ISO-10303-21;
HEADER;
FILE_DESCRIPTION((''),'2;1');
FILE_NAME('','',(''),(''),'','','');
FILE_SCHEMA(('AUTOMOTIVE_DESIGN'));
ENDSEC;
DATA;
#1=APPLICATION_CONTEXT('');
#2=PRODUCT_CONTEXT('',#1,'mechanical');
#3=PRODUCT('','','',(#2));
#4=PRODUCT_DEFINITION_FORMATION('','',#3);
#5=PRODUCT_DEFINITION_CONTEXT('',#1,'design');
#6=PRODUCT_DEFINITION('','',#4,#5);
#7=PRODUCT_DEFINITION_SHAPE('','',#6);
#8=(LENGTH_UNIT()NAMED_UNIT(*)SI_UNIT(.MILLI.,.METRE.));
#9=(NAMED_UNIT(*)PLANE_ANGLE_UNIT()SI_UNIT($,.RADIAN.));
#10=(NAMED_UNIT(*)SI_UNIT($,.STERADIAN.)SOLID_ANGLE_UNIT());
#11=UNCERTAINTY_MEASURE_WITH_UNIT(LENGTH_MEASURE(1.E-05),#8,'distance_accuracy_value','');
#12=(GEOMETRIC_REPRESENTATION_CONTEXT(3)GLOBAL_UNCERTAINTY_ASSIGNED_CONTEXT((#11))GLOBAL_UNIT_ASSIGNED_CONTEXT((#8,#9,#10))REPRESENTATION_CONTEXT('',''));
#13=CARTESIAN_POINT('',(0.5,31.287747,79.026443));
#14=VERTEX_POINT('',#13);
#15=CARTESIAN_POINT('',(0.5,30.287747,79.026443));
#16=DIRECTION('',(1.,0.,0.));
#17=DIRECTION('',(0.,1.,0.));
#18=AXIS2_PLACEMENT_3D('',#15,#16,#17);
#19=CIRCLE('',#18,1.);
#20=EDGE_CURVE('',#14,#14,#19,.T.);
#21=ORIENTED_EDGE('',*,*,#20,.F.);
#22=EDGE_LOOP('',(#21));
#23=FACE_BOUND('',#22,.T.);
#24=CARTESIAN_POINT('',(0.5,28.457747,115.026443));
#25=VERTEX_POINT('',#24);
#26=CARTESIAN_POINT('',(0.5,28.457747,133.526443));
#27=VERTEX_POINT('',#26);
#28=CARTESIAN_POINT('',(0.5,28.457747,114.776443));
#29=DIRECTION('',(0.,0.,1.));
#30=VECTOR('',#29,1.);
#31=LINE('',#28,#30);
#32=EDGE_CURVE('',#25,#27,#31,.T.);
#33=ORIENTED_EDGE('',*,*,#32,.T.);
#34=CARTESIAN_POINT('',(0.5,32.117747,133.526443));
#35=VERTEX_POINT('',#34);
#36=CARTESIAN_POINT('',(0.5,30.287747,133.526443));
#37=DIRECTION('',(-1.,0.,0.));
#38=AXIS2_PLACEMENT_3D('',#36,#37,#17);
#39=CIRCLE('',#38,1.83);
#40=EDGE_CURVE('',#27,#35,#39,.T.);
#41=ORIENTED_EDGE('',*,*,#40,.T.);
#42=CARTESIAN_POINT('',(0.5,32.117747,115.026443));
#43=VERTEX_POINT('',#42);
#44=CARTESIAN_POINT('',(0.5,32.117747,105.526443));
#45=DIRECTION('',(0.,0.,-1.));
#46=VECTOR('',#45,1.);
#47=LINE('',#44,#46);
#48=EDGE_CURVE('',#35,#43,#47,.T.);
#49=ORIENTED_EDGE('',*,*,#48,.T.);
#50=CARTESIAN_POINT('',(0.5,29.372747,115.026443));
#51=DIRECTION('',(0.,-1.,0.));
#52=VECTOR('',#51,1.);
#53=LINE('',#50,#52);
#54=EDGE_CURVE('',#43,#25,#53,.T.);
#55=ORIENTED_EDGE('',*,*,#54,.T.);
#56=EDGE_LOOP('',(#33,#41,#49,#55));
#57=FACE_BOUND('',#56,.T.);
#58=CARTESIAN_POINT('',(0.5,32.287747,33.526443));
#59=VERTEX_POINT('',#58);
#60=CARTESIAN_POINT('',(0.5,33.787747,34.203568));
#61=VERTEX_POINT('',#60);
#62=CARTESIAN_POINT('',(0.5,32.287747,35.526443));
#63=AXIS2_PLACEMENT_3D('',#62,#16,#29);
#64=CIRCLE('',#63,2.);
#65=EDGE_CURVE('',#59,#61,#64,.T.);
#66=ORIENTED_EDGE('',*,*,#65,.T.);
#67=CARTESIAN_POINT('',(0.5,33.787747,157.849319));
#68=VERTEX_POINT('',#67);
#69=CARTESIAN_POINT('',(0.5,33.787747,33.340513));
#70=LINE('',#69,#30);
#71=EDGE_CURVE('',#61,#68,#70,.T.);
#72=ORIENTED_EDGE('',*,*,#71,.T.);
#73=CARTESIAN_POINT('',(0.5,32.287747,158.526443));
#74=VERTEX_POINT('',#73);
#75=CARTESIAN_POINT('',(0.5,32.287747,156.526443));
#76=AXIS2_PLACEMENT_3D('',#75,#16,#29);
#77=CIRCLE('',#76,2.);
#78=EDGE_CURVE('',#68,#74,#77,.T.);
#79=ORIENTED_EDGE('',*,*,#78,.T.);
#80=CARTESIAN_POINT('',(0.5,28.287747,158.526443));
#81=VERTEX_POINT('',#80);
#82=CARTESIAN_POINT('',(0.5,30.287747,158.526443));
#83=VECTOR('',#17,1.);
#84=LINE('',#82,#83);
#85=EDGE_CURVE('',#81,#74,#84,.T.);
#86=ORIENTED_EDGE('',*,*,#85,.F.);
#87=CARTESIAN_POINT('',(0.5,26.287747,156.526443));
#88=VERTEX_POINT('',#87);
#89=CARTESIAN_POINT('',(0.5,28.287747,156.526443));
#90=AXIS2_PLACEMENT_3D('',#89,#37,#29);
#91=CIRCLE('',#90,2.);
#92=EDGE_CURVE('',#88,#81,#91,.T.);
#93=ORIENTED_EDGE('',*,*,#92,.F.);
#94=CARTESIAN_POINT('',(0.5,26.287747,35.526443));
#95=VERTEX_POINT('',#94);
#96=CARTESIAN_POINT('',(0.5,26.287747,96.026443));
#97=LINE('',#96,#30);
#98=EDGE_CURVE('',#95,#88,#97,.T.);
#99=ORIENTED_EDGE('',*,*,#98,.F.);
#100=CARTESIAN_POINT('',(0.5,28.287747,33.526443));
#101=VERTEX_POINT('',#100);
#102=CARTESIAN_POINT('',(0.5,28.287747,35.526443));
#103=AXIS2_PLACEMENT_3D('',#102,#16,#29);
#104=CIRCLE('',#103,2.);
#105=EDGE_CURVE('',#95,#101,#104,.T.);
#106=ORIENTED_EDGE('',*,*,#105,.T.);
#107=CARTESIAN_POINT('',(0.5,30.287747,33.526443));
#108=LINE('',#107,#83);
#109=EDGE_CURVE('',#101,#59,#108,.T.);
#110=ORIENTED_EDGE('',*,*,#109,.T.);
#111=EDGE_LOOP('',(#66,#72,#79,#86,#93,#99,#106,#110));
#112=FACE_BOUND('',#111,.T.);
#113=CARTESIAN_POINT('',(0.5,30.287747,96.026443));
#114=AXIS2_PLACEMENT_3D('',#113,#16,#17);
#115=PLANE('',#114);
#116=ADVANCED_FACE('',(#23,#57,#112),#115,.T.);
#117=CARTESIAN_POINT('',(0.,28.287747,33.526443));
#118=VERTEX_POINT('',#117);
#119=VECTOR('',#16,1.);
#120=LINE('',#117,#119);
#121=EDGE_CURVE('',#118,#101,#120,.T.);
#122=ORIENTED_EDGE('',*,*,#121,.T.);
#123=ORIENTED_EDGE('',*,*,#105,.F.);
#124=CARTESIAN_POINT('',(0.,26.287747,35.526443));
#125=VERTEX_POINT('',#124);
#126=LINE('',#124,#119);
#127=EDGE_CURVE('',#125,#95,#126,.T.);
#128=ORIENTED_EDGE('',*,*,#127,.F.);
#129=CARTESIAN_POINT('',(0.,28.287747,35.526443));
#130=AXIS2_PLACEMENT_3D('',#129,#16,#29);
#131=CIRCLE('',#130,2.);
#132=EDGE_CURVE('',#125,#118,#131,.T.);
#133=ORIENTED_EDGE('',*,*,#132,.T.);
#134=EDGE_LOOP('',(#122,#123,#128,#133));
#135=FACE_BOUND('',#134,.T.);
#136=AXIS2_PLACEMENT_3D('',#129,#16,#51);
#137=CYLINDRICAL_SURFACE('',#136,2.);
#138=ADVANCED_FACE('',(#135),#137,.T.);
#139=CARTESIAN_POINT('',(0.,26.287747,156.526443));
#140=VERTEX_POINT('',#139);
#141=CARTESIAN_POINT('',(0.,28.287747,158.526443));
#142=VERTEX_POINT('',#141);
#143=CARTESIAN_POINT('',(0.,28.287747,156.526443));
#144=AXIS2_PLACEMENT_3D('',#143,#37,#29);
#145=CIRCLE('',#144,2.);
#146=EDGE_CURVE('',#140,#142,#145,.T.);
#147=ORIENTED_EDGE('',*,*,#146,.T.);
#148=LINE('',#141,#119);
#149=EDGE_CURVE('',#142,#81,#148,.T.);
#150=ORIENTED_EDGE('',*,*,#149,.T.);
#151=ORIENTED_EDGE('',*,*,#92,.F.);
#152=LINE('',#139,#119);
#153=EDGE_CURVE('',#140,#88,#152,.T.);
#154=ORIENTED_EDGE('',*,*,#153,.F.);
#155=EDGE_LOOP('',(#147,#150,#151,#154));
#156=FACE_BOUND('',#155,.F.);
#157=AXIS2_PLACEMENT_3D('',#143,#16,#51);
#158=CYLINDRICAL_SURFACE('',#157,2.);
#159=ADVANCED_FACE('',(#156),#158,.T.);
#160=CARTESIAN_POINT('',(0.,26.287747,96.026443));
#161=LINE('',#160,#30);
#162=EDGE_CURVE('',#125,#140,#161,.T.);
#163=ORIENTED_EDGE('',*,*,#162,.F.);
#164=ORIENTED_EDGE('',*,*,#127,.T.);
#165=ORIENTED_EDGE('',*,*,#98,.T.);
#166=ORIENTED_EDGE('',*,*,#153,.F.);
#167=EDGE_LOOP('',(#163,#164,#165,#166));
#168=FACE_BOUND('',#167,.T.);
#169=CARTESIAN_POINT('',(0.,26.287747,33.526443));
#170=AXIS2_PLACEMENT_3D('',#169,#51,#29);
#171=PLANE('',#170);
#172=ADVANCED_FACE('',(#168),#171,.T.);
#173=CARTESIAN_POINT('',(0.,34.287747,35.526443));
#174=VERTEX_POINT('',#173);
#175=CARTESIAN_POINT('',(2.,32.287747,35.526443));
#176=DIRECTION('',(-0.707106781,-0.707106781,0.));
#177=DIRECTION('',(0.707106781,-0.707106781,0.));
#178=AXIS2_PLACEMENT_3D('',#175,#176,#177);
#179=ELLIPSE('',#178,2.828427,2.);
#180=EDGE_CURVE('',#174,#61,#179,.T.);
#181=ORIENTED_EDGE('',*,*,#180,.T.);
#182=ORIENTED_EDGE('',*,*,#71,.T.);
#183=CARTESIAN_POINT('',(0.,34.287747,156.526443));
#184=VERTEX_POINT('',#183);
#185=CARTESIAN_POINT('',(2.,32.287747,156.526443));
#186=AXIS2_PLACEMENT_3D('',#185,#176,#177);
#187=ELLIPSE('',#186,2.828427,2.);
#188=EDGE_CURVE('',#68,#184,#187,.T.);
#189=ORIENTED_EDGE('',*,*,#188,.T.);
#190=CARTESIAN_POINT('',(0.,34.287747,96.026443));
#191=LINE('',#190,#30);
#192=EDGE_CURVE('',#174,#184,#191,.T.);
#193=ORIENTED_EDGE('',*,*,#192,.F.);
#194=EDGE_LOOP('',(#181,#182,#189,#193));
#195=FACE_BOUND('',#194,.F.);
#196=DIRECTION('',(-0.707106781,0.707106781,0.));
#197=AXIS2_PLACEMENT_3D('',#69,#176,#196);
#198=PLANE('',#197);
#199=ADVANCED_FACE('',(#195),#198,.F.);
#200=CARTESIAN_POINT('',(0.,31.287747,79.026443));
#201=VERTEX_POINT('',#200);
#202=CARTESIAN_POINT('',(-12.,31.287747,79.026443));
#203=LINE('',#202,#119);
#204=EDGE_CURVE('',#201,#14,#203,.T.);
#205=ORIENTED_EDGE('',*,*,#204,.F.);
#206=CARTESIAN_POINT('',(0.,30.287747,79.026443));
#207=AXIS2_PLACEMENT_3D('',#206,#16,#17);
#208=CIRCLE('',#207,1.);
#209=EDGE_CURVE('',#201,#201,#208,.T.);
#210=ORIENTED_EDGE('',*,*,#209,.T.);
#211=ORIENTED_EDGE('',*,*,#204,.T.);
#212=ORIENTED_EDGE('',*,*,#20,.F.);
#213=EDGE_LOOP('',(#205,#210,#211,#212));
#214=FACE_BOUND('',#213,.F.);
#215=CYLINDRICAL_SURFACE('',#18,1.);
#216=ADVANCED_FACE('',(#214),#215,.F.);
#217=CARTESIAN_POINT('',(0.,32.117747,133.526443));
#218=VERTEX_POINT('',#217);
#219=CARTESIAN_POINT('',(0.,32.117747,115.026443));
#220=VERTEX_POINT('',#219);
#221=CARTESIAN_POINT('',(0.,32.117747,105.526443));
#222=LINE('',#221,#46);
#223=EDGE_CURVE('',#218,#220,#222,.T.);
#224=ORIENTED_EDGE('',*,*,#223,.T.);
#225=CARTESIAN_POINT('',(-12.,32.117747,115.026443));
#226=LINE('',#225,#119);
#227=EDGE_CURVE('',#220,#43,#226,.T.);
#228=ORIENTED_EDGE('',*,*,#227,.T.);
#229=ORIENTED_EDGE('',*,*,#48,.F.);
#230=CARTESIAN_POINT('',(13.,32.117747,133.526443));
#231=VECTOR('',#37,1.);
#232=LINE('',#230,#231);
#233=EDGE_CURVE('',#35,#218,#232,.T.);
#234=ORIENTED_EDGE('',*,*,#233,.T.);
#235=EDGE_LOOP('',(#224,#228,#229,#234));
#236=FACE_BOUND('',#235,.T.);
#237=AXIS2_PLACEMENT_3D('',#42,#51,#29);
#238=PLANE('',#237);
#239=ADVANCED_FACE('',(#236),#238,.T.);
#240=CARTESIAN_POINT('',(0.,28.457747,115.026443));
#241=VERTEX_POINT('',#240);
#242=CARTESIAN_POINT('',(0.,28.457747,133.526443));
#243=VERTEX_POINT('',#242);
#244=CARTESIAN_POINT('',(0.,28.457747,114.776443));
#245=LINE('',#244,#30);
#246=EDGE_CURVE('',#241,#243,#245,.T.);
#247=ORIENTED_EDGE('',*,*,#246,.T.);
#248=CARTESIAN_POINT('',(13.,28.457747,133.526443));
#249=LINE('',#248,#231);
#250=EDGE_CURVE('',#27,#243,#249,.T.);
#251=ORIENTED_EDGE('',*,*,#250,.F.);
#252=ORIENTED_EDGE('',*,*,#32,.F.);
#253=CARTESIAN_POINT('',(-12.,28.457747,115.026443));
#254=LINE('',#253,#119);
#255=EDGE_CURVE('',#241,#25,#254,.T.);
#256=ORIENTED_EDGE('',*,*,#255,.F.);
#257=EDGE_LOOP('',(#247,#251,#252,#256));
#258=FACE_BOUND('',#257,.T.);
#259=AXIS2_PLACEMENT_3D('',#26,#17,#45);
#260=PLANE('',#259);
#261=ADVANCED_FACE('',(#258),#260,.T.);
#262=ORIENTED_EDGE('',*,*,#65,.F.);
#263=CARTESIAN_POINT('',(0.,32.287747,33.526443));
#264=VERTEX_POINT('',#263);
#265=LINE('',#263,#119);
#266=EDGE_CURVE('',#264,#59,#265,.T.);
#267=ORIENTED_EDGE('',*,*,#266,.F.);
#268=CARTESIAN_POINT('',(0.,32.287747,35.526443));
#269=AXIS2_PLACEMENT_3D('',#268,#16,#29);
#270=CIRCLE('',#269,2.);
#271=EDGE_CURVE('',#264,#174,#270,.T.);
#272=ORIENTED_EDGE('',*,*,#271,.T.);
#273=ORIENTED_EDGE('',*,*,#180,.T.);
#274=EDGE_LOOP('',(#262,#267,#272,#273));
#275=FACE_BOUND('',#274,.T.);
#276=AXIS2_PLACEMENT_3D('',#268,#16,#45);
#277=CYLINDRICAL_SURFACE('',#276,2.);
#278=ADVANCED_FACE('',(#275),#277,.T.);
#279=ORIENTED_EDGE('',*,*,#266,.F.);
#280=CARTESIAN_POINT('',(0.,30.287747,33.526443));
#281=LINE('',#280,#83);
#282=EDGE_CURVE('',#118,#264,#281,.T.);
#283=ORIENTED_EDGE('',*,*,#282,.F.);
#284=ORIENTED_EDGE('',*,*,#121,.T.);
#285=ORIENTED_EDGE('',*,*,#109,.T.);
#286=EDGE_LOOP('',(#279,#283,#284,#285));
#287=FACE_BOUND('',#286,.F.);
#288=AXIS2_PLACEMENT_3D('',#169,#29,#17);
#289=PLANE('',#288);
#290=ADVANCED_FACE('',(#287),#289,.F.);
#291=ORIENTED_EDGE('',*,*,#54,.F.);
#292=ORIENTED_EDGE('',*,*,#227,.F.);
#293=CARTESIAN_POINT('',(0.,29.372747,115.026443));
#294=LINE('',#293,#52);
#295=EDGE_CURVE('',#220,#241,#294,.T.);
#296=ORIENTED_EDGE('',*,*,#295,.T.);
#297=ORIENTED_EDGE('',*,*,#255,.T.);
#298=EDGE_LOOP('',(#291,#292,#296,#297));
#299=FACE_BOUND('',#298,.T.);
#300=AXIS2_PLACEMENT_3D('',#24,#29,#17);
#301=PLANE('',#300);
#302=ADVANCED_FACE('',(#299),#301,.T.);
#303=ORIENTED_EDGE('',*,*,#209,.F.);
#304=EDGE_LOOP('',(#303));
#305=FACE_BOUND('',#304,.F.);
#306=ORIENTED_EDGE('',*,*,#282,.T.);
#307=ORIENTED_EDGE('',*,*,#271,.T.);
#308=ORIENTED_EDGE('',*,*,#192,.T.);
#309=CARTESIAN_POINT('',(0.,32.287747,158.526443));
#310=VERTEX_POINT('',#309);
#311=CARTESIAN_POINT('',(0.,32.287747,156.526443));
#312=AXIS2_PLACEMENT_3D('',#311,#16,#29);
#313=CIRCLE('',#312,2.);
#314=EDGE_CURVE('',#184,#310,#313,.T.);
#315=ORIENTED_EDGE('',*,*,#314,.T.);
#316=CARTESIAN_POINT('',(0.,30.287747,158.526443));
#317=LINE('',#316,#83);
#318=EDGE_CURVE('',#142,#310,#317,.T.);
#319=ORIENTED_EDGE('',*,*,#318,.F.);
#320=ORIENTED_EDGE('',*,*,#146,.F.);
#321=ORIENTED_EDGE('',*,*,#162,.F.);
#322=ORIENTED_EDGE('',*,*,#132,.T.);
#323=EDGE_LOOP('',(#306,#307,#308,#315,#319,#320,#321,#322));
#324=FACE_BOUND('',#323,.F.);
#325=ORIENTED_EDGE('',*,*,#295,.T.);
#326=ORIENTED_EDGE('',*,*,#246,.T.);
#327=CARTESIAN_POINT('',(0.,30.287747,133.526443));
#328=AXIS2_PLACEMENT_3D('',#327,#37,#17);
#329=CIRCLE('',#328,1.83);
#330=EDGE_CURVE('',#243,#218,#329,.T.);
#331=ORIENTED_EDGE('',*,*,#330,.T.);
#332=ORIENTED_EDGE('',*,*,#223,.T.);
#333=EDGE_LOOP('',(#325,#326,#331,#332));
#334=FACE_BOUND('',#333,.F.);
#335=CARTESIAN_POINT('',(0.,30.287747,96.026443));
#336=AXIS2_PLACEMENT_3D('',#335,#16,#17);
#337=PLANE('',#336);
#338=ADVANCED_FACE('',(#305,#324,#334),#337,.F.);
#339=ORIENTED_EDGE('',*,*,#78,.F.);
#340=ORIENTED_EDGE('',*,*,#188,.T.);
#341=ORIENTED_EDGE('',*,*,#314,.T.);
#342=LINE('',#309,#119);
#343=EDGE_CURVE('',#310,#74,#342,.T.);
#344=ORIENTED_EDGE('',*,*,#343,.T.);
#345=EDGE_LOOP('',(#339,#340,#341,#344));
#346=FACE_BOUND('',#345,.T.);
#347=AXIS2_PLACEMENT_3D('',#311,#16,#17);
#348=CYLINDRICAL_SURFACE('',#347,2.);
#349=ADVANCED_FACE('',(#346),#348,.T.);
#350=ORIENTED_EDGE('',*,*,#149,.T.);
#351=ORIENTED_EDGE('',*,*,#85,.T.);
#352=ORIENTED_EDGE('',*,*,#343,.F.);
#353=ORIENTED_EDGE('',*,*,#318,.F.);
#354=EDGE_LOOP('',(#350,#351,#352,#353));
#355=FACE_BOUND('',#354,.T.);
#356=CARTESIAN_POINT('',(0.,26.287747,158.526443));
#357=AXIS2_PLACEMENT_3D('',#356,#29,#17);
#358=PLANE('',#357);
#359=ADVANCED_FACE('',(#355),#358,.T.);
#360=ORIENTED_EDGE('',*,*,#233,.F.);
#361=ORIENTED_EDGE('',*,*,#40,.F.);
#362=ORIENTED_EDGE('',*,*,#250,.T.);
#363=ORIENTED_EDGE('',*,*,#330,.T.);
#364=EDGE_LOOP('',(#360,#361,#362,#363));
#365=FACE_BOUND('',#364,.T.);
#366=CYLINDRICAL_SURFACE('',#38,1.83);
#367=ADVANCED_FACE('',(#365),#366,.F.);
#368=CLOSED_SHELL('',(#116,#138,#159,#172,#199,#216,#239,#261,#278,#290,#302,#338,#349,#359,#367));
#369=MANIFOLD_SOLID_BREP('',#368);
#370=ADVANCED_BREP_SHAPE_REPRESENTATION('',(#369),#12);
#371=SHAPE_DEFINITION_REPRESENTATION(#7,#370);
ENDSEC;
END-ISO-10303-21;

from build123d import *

# Parameters (mm, degrees)
F0_W        = 8
F0_H        = 125
F1_DEPTH    = 0.5
F2_R        = 2
F3_R        = 1
F4_DEPTH    = 12.5
F5_T1_DEPTH = 125.3718610795


# Not quite as in the source:
# - a fillet or chamfer that OpenCascade refuses, or shapes differently, is made with other operations: its cross-section is extruded or revolved along the edge and cut away or added


with BuildPart() as f1:
    # F0 (on Right) → F1 (new body)
    with BuildSketch(Plane.YZ):
        with Locations((30.2877472714, 96.0264432559)):
            Rectangle(F0_W, F0_H)
    extrude(amount=F1_DEPTH)

    # F2
    f2_edges = [f1.edges().sort_by_distance(p)[0] for p in [
        (0.25, 26.287747, 158.526443),
        (0.25, 34.287747, 158.526443),
        (0.25, 34.287747, 33.526443),
        (0.25, 26.287747, 33.526443),
    ]]
    fillet(f2_edges, radius=F2_R)

    # F3 (on face) → F4 (cut, symmetric)
    with BuildSketch(Plane.YZ.offset(0.5)):
        with BuildLine():
            Line((28.4577472714, 133.5264432559), (28.4577472714, 115.0264432559))
            Line((28.4577472714, 115.0264432559), (32.1177472714, 115.0264432559))
            Line((32.1177472714, 115.0264432559), (32.1177472714, 133.5264432559))
            ThreePointArc((32.1177472714, 133.5264432559), (30.2877472714, 135.3564432559), (28.4577472714, 133.5264432559))
        make_face()
        with Locations((30.2877472714, 79.0264432559)):
            Circle(F3_R)
    extrude(amount=F4_DEPTH, both=True, mode=Mode.SUBTRACT)

    # F5: chamfer of 0.5 on 1 edges, made by hand

    # F5_s2 → F5_t1 (cut)
    with BuildSketch(Plane.XY.offset(33.3405127162)):
        Polygon((0.5, 33.7877472714), (0, 34.2877472714), (0.5, 34.2877472714), align=None)
    extrude(amount=F5_T1_DEPTH, mode=Mode.SUBTRACT)


solid = f1.part
